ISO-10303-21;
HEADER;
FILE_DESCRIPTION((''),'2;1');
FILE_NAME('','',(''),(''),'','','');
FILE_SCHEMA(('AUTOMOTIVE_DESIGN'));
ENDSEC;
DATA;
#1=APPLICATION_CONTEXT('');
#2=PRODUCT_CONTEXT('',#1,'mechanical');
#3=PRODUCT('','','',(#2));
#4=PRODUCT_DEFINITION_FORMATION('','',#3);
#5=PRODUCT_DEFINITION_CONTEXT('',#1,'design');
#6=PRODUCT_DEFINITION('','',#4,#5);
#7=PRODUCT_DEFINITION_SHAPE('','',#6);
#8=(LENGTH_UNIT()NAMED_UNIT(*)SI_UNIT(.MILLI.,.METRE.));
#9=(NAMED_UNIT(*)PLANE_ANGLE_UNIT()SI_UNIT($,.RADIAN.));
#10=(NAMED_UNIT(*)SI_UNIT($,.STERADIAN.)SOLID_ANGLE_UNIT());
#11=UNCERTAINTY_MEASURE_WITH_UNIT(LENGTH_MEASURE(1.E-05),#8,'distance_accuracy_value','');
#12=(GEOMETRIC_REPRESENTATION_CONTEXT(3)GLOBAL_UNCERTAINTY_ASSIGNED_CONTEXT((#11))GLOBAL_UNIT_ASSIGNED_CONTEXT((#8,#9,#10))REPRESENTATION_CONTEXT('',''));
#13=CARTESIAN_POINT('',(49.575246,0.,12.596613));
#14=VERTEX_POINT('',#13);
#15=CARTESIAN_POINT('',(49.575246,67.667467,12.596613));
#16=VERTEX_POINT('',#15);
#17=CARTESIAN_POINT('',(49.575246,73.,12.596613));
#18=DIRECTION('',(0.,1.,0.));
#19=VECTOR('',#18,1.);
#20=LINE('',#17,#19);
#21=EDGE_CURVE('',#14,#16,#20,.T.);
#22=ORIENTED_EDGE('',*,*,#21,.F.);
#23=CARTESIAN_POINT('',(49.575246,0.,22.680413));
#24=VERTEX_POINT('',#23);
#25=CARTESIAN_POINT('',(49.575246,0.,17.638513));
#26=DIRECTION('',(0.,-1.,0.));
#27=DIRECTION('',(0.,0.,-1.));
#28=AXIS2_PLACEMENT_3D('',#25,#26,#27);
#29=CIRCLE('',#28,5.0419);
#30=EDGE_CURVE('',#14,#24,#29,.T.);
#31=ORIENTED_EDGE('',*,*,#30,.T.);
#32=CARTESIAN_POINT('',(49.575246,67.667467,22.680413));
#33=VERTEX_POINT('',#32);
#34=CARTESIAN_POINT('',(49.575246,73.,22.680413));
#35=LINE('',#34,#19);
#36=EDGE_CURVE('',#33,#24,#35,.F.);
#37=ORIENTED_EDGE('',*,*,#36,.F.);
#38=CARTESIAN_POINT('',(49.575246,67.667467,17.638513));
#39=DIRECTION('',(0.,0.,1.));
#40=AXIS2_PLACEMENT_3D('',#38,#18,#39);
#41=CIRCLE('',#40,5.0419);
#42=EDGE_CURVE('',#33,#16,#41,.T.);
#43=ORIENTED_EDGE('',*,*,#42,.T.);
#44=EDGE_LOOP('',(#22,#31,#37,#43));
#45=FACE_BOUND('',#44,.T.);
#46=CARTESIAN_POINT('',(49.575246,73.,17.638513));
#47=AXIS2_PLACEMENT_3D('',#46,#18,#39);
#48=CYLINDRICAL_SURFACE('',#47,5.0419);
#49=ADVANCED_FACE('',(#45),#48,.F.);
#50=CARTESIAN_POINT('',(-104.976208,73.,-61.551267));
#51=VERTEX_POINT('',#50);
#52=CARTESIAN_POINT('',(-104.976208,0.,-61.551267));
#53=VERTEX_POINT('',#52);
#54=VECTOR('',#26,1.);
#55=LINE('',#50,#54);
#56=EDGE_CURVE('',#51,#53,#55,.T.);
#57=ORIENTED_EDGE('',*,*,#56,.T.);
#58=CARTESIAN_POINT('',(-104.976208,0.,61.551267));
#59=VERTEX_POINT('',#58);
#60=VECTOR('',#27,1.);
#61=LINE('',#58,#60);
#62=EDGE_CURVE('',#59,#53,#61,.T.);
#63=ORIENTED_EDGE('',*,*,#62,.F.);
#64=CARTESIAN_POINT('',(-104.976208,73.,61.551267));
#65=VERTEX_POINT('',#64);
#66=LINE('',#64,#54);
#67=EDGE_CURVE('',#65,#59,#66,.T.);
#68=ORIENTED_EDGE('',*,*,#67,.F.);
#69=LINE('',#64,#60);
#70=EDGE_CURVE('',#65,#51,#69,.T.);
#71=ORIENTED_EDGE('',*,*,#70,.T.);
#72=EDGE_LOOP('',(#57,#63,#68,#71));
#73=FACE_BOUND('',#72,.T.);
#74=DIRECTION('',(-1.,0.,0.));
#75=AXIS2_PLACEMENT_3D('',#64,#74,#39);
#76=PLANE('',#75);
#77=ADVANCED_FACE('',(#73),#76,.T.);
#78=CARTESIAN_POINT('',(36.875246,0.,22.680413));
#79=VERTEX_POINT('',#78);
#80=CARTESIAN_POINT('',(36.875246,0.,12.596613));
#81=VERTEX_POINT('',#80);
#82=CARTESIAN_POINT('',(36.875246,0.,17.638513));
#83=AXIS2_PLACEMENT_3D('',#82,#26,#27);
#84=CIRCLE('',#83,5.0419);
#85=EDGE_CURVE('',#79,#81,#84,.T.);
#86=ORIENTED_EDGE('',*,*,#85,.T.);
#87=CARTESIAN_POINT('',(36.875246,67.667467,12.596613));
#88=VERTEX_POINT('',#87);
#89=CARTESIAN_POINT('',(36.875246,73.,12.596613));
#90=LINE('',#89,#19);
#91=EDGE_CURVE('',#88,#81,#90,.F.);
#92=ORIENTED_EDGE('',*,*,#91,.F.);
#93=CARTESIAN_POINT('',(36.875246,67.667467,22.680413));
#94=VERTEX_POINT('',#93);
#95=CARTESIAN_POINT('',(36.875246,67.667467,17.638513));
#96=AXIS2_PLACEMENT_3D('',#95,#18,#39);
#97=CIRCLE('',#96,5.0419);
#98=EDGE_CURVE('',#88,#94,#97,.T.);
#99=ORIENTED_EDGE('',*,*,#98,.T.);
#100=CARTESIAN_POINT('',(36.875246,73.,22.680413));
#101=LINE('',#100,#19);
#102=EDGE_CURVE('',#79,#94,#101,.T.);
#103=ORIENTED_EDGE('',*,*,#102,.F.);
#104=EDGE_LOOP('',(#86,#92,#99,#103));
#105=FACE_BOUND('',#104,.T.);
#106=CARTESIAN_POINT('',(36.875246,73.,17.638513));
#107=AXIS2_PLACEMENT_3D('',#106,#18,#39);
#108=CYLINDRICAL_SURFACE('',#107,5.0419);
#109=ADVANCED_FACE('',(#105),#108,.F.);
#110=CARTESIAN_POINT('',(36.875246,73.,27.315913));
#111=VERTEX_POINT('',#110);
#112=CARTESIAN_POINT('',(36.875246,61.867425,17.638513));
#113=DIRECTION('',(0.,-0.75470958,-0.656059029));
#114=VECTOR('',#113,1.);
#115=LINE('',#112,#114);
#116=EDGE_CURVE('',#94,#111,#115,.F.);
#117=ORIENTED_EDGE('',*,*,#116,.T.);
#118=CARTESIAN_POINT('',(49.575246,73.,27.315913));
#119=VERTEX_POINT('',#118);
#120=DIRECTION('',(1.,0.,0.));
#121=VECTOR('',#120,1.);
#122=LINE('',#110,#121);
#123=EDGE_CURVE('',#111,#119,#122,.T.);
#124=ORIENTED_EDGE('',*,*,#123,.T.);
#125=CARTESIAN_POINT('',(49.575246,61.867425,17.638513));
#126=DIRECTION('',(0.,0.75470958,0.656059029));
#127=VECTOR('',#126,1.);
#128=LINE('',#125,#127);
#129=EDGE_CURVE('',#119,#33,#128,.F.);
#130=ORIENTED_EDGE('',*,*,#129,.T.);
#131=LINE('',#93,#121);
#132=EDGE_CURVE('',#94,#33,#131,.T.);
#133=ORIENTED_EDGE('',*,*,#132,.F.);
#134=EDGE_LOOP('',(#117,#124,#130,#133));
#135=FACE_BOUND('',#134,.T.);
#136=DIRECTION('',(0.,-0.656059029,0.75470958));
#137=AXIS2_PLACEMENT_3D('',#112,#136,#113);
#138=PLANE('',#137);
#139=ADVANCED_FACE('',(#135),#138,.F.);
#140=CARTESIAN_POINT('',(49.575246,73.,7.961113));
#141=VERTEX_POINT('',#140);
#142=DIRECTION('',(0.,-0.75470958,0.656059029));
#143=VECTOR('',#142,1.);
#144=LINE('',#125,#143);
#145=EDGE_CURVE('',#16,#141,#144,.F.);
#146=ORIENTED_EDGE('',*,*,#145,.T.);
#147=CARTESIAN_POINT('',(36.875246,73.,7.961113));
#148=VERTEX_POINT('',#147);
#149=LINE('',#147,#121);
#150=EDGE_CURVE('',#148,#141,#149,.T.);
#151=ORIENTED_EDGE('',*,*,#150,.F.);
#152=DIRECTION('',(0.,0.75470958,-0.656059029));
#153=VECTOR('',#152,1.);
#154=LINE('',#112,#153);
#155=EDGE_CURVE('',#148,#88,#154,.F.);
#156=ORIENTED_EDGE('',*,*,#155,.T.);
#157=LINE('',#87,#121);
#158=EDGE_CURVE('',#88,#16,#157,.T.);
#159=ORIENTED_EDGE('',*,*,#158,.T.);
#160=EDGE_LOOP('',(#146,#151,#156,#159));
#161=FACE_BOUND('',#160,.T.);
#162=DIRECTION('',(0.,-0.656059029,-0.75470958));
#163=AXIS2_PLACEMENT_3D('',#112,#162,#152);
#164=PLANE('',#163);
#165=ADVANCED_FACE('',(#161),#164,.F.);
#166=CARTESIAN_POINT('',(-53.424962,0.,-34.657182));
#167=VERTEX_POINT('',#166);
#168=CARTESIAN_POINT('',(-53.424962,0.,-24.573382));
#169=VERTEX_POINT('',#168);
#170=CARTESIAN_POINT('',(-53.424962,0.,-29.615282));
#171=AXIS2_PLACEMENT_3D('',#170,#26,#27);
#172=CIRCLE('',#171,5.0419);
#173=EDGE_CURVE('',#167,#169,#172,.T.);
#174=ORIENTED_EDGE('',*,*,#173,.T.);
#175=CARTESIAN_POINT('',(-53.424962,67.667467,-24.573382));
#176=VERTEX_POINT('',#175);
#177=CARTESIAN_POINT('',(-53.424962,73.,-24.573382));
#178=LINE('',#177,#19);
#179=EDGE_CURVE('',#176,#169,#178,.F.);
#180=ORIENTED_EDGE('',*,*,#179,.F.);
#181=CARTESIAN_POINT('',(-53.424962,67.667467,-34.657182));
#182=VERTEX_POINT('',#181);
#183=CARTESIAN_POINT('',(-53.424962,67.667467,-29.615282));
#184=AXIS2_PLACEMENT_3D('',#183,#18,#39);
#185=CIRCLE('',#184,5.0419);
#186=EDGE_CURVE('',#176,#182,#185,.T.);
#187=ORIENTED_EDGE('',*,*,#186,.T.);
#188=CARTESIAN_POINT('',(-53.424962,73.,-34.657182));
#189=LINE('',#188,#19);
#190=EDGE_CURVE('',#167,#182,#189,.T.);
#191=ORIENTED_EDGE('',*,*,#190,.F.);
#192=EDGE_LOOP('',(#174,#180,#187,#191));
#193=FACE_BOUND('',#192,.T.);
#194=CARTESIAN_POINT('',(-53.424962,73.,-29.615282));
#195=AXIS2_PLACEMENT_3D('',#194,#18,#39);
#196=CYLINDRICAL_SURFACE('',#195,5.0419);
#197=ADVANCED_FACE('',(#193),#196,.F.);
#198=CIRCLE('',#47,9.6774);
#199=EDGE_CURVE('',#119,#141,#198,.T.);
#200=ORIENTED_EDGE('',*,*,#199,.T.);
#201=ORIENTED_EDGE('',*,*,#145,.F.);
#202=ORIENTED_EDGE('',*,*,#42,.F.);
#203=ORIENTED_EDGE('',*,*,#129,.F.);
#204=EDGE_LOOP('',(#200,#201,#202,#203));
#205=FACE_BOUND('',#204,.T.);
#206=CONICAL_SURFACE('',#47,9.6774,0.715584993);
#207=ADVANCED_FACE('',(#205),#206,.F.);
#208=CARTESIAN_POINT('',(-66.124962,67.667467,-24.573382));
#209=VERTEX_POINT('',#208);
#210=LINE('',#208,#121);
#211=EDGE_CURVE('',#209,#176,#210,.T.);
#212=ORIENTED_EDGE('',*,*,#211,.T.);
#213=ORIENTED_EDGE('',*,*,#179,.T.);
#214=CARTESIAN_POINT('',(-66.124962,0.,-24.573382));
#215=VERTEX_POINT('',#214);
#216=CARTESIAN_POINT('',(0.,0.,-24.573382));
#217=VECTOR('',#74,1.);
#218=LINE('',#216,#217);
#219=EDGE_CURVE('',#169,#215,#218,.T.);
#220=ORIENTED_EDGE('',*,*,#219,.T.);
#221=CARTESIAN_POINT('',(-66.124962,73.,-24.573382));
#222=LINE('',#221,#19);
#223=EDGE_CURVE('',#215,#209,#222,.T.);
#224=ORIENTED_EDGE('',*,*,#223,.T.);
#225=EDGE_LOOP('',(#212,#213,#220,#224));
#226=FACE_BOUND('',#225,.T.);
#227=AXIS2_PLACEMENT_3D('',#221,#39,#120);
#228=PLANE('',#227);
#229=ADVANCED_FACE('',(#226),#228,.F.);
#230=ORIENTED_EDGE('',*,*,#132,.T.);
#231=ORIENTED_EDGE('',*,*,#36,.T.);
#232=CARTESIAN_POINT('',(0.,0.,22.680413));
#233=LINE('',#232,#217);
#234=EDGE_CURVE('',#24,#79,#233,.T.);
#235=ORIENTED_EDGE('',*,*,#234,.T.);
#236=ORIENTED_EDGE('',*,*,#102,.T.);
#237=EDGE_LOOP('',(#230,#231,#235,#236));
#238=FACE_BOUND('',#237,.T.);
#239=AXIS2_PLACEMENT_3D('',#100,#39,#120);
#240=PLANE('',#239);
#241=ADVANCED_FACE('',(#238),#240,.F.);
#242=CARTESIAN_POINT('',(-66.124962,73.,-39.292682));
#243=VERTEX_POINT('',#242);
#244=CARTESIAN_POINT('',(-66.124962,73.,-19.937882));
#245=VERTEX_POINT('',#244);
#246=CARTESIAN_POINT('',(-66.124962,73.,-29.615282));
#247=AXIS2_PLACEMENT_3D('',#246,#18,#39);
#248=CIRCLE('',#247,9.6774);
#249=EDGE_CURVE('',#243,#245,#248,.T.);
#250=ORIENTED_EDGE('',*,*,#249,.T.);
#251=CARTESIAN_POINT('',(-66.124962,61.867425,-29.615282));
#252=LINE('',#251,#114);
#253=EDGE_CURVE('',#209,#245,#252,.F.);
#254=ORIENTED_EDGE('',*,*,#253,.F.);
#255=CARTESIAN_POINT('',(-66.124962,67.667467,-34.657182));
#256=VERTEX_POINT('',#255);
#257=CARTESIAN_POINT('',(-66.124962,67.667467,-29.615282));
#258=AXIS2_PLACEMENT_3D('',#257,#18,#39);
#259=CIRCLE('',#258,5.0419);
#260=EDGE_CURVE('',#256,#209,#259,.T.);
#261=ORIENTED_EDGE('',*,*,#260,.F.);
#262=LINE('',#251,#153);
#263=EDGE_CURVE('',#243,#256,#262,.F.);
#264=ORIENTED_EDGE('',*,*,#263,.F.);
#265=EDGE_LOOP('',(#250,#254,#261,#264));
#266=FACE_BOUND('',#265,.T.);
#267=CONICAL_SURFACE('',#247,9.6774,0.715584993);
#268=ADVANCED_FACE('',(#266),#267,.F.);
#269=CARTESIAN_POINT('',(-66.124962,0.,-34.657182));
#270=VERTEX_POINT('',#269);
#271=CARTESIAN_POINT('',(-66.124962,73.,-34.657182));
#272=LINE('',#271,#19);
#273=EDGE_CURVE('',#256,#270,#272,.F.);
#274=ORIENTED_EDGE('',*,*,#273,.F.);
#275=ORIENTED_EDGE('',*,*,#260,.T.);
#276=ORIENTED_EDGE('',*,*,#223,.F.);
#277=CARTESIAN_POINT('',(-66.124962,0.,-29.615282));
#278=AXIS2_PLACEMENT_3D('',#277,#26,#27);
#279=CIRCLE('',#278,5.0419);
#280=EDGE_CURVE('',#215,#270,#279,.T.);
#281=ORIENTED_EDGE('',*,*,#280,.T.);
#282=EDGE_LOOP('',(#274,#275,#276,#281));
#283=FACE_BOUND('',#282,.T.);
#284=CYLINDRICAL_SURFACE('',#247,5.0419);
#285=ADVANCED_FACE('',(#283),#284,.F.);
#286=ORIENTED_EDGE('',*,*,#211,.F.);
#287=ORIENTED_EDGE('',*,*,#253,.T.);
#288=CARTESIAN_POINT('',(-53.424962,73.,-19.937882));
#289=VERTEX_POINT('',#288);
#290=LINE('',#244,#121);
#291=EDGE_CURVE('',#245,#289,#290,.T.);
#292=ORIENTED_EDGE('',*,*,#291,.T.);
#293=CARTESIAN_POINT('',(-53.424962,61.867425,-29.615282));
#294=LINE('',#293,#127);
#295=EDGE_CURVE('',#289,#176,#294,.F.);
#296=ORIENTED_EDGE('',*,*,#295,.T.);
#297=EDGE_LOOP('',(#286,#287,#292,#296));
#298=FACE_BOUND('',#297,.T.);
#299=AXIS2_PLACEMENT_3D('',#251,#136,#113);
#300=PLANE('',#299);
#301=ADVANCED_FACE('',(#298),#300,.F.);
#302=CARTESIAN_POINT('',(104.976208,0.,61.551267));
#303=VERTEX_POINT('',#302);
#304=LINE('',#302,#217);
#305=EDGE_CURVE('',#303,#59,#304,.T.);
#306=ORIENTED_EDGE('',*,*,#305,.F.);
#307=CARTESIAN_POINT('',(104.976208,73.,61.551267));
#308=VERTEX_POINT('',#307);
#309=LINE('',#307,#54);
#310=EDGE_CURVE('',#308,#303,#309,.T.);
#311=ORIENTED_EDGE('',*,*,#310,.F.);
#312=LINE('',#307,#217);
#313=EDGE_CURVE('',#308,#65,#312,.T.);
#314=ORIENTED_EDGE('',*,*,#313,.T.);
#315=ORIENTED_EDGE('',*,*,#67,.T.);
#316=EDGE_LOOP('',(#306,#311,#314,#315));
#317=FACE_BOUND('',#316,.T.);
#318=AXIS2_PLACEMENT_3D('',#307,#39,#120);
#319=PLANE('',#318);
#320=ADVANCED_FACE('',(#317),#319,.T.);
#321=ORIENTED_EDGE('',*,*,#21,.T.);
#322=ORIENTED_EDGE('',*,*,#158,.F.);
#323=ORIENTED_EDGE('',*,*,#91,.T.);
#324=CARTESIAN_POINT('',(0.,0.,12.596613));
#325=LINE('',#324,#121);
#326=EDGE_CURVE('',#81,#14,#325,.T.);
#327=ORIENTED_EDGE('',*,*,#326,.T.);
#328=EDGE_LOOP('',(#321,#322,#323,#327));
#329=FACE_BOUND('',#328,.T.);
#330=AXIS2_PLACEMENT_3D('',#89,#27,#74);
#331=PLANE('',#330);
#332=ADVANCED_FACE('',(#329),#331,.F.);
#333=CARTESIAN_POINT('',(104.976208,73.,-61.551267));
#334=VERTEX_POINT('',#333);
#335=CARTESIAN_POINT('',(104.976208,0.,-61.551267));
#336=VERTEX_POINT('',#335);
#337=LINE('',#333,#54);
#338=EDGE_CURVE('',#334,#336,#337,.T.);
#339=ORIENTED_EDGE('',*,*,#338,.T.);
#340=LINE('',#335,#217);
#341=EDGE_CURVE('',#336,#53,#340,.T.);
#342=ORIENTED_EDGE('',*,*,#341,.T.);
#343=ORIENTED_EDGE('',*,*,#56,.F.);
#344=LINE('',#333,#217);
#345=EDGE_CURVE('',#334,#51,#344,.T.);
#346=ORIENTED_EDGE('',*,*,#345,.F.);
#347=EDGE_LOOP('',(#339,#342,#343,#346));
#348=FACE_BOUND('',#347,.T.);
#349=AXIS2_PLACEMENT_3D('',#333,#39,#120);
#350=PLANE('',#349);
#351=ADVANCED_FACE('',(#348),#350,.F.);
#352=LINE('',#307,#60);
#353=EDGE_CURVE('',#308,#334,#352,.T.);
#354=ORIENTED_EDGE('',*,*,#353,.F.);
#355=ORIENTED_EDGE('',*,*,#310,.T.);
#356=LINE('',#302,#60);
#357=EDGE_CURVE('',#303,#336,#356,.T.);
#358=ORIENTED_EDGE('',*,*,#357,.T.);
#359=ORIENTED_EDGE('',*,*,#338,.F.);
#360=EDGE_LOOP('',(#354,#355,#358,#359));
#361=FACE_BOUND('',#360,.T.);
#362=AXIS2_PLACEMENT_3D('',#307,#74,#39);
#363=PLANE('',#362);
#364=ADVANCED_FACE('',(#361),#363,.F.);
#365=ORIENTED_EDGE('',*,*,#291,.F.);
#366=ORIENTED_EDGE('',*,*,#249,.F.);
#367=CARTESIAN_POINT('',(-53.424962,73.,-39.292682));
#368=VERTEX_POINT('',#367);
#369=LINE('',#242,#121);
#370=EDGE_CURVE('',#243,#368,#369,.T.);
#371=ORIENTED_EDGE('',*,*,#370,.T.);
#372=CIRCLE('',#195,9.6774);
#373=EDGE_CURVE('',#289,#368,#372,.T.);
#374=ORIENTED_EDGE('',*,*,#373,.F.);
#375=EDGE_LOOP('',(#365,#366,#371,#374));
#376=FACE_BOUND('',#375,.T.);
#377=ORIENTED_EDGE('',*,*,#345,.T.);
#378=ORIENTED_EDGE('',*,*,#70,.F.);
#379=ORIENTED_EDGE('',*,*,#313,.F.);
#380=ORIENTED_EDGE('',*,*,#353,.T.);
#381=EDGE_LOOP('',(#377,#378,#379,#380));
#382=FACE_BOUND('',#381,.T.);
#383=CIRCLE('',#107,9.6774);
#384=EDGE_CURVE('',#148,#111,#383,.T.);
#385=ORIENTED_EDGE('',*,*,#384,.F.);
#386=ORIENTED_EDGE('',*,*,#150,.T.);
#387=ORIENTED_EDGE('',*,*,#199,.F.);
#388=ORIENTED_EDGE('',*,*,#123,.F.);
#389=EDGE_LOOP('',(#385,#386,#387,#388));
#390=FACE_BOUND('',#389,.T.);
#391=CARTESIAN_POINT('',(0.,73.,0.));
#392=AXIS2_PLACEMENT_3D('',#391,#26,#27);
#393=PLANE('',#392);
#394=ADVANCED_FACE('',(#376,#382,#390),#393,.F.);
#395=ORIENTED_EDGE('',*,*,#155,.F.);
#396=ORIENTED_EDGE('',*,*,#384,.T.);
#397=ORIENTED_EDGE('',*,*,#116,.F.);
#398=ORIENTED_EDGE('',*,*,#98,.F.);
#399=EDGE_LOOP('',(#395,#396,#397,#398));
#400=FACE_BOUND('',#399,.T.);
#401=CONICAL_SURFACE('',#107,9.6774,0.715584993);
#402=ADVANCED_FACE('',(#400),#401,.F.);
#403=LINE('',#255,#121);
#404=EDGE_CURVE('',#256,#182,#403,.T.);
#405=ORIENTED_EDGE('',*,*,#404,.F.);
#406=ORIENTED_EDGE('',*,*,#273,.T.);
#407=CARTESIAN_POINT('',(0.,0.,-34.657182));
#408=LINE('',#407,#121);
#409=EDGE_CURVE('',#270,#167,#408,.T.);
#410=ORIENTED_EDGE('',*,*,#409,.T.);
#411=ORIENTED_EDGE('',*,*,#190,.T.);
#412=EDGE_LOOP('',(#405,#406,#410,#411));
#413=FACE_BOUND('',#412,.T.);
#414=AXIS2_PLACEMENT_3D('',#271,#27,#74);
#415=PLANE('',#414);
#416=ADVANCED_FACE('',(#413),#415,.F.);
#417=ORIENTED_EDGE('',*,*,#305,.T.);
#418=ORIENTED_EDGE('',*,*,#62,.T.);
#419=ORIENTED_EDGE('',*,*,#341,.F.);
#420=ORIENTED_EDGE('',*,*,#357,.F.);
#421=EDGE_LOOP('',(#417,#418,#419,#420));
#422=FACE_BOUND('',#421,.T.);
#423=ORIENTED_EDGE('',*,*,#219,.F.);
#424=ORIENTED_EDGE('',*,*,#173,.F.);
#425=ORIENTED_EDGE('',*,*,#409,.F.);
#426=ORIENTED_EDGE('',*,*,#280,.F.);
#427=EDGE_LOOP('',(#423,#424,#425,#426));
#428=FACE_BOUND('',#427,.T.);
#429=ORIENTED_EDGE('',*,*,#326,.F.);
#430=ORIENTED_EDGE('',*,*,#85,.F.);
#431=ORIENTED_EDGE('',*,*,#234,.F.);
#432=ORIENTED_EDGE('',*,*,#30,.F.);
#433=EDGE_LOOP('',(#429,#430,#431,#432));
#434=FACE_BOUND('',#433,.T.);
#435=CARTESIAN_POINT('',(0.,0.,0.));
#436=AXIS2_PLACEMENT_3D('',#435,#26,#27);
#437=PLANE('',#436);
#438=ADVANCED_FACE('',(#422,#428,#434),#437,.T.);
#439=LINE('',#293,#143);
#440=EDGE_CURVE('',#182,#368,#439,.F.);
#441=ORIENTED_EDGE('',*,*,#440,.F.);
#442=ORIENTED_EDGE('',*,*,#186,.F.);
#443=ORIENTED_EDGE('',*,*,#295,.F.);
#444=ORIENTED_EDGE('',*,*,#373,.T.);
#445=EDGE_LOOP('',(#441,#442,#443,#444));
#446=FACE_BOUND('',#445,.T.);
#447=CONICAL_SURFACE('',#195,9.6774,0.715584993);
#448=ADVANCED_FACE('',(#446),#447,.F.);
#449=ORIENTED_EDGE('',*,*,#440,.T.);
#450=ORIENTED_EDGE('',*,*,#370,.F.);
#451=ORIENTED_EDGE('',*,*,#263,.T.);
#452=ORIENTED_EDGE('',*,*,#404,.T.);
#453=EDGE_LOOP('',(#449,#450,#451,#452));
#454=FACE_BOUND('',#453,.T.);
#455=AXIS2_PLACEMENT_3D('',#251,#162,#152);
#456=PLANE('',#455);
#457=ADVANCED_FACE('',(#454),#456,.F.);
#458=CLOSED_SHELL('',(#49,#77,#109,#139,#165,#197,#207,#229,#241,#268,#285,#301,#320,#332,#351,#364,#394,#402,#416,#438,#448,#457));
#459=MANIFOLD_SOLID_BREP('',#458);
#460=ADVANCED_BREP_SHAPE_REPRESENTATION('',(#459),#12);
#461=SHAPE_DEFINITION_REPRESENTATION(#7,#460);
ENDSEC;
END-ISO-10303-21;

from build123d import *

# Parameters (mm, degrees)
SKETCH1_W                                      = 209.952415438
SKETCH1_H                                      = 123.10253427
BOSS_EXTRUDE1_DEPTH                            = 73
CSK_START                                      = -1
CSK_SLOT_FOR_3_8_FLAT_HEAD_MACHINE_SCREW_DEPTH = 74


with BuildPart() as part:
    # Sketch1 → Boss-Extrude1 (new body)
    with BuildSketch(Plane(origin=(0, 0, 0), x_dir=(1, 0, 0), z_dir=(0, 1, 0))):
        Rectangle(SKETCH1_W, SKETCH1_H)
    extrude(amount=BOSS_EXTRUDE1_DEPTH)

    # CSK SLOT for 3/8 Flat Head Machine Screw1: read off the stored shape, not the designer's step
    # CSK SLOT for 3_8 Flat Head Machine S 2 → CSK SLOT for 3/8 Flat Head Machine Screw1 (cut)
    with BuildSketch(Plane(origin=(0, 0, 0), x_dir=(1, 0, 0), z_dir=(0, 1, 0)).offset(CSK_START)):
        with BuildLine():
            Line((36.875245681, -22.680413351), (49.575245681, -22.680413351))
            ThreePointArc((49.575245681, -22.680413351), (54.617145681, -17.638513351), (49.575245681, -12.596613351))
            Line((49.575245681, -12.596613351), (36.875245681, -12.596613351))
            ThreePointArc((36.875245681, -12.596613351), (31.833345681, -17.638513351), (36.875245681, -22.680413351))
        make_face()
        with BuildLine():
            Line((-66.124961912, 24.573381676), (-53.424961912, 24.573381676))
            ThreePointArc((-53.424961912, 24.573381676), (-48.383061912, 29.615281676), (-53.424961912, 34.657181676))
            Line((-53.424961912, 34.657181676), (-66.124961912, 34.657181676))
            ThreePointArc((-66.124961912, 34.657181676), (-71.166861912, 29.615281676), (-66.124961912, 24.573381676))
        make_face()
    extrude(amount=CSK_SLOT_FOR_3_8_FLAT_HEAD_MACHINE_SCREW_DEPTH, mode=Mode.SUBTRACT)

    # CSK SLOT for 3_8 Flat Head Machine S 3: loft between two sections, ruled curve by curve
    csk_slot_for_3_8_flat_head_machine_s_3_from = [
        Edge.make_three_point_arc((49.575245681, 67.667467248, 22.680413351), (53.140407361, 67.667467248, 21.203675031), (54.617145681, 67.667467248, 17.638513351)),
        Edge.make_three_point_arc((54.617145681, 67.667467248, 17.638513351), (53.140407361, 67.667467248, 14.073351671), (49.575245681, 67.667467248, 12.596613351)),
        Edge.make_three_point_arc((36.875245681, 67.667467248, 12.596613351), (33.310084001, 67.667467248, 14.073351671), (31.833345681, 67.667467248, 17.638513351)),
        Edge.make_three_point_arc((31.833345681, 67.667467248, 17.638513351), (33.310084001, 67.667467248, 21.203675031), (36.875245681, 67.667467248, 22.680413351)),
        Edge.make_line((49.575245681, 67.667467248, 12.596613351), (36.875245681, 67.667467248, 12.596613351)),
        Edge.make_line((49.575245681, 67.667467248, 22.680413351), (36.875245681, 67.667467248, 22.680413351)),
    ]
    csk_slot_for_3_8_flat_head_machine_s_3_to = [
        Edge.make_three_point_arc((49.575245681, 73, 27.315913351), (56.418200846, 73, 24.481468515), (59.252645681, 73, 17.638513351)),
        Edge.make_three_point_arc((59.252645681, 73, 17.638513351), (56.418200846, 73, 10.795558187), (49.575245681, 73, 7.961113351)),
        Edge.make_three_point_arc((36.875245681, 73, 7.961113351), (30.032290517, 73, 10.795558187), (27.197845681, 73, 17.638513351)),
        Edge.make_three_point_arc((27.197845681, 73, 17.638513351), (30.032290517, 73, 24.481468515), (36.875245681, 73, 27.315913351)),
        Edge.make_line((49.575245681, 73, 7.961113351), (36.875245681, 73, 7.961113351)),
        Edge.make_line((49.575245681, 73, 27.315913351), (36.875245681, 73, 27.315913351)),
    ]
    csk_slot_for_3_8_flat_head_machine_s_3 = Solid(Shell([*[Face.make_surface_from_curves(csk_slot_for_3_8_flat_head_machine_s_3_from[k], csk_slot_for_3_8_flat_head_machine_s_3_to[k]) for k in range(6)], Face(Wire(csk_slot_for_3_8_flat_head_machine_s_3_from)), Face(Wire(csk_slot_for_3_8_flat_head_machine_s_3_to))]))
    add(csk_slot_for_3_8_flat_head_machine_s_3, mode=Mode.SUBTRACT)

    # CSK SLOT for 3_8 Flat Head Machine S 4: loft between two sections, ruled curve by curve
    csk_slot_for_3_8_flat_head_machine_s_4_from = [
        Edge.make_three_point_arc((-53.424961912, 67.667467248, -24.573381676), (-49.859800232, 67.667467248, -26.050119996), (-48.383061912, 67.667467248, -29.615281676)),
        Edge.make_three_point_arc((-48.383061912, 67.667467248, -29.615281676), (-49.859800232, 67.667467248, -33.180443356), (-53.424961912, 67.667467248, -34.657181676)),
        Edge.make_three_point_arc((-66.124961912, 67.667467248, -34.657181676), (-69.690123592, 67.667467248, -33.180443356), (-71.166861912, 67.667467248, -29.615281676)),
        Edge.make_three_point_arc((-71.166861912, 67.667467248, -29.615281676), (-69.690123592, 67.667467248, -26.050119996), (-66.124961912, 67.667467248, -24.573381676)),
        Edge.make_line((-53.424961912, 67.667467248, -34.657181676), (-66.124961912, 67.667467248, -34.657181676)),
        Edge.make_line((-53.424961912, 67.667467248, -24.573381676), (-66.124961912, 67.667467248, -24.573381676)),
    ]
    csk_slot_for_3_8_flat_head_machine_s_4_to = [
        Edge.make_three_point_arc((-53.424961912, 73, -19.937881676), (-46.582006748, 73, -22.772326512), (-43.747561912, 73, -29.615281676)),
        Edge.make_three_point_arc((-43.747561912, 73, -29.615281676), (-46.582006748, 73, -36.45823684), (-53.424961912, 73, -39.292681676)),
        Edge.make_three_point_arc((-66.124961912, 73, -39.292681676), (-72.967917076, 73, -36.45823684), (-75.802361912, 73, -29.615281676)),
        Edge.make_three_point_arc((-75.802361912, 73, -29.615281676), (-72.967917076, 73, -22.772326512), (-66.124961912, 73, -19.937881676)),
        Edge.make_line((-53.424961912, 73, -39.292681676), (-66.124961912, 73, -39.292681676)),
        Edge.make_line((-53.424961912, 73, -19.937881676), (-66.124961912, 73, -19.937881676)),
    ]
    csk_slot_for_3_8_flat_head_machine_s_4 = Solid(Shell([*[Face.make_surface_from_curves(csk_slot_for_3_8_flat_head_machine_s_4_from[k], csk_slot_for_3_8_flat_head_machine_s_4_to[k]) for k in range(6)], Face(Wire(csk_slot_for_3_8_flat_head_machine_s_4_from)), Face(Wire(csk_slot_for_3_8_flat_head_machine_s_4_to))]))
    add(csk_slot_for_3_8_flat_head_machine_s_4, mode=Mode.SUBTRACT)


solid = part.part
